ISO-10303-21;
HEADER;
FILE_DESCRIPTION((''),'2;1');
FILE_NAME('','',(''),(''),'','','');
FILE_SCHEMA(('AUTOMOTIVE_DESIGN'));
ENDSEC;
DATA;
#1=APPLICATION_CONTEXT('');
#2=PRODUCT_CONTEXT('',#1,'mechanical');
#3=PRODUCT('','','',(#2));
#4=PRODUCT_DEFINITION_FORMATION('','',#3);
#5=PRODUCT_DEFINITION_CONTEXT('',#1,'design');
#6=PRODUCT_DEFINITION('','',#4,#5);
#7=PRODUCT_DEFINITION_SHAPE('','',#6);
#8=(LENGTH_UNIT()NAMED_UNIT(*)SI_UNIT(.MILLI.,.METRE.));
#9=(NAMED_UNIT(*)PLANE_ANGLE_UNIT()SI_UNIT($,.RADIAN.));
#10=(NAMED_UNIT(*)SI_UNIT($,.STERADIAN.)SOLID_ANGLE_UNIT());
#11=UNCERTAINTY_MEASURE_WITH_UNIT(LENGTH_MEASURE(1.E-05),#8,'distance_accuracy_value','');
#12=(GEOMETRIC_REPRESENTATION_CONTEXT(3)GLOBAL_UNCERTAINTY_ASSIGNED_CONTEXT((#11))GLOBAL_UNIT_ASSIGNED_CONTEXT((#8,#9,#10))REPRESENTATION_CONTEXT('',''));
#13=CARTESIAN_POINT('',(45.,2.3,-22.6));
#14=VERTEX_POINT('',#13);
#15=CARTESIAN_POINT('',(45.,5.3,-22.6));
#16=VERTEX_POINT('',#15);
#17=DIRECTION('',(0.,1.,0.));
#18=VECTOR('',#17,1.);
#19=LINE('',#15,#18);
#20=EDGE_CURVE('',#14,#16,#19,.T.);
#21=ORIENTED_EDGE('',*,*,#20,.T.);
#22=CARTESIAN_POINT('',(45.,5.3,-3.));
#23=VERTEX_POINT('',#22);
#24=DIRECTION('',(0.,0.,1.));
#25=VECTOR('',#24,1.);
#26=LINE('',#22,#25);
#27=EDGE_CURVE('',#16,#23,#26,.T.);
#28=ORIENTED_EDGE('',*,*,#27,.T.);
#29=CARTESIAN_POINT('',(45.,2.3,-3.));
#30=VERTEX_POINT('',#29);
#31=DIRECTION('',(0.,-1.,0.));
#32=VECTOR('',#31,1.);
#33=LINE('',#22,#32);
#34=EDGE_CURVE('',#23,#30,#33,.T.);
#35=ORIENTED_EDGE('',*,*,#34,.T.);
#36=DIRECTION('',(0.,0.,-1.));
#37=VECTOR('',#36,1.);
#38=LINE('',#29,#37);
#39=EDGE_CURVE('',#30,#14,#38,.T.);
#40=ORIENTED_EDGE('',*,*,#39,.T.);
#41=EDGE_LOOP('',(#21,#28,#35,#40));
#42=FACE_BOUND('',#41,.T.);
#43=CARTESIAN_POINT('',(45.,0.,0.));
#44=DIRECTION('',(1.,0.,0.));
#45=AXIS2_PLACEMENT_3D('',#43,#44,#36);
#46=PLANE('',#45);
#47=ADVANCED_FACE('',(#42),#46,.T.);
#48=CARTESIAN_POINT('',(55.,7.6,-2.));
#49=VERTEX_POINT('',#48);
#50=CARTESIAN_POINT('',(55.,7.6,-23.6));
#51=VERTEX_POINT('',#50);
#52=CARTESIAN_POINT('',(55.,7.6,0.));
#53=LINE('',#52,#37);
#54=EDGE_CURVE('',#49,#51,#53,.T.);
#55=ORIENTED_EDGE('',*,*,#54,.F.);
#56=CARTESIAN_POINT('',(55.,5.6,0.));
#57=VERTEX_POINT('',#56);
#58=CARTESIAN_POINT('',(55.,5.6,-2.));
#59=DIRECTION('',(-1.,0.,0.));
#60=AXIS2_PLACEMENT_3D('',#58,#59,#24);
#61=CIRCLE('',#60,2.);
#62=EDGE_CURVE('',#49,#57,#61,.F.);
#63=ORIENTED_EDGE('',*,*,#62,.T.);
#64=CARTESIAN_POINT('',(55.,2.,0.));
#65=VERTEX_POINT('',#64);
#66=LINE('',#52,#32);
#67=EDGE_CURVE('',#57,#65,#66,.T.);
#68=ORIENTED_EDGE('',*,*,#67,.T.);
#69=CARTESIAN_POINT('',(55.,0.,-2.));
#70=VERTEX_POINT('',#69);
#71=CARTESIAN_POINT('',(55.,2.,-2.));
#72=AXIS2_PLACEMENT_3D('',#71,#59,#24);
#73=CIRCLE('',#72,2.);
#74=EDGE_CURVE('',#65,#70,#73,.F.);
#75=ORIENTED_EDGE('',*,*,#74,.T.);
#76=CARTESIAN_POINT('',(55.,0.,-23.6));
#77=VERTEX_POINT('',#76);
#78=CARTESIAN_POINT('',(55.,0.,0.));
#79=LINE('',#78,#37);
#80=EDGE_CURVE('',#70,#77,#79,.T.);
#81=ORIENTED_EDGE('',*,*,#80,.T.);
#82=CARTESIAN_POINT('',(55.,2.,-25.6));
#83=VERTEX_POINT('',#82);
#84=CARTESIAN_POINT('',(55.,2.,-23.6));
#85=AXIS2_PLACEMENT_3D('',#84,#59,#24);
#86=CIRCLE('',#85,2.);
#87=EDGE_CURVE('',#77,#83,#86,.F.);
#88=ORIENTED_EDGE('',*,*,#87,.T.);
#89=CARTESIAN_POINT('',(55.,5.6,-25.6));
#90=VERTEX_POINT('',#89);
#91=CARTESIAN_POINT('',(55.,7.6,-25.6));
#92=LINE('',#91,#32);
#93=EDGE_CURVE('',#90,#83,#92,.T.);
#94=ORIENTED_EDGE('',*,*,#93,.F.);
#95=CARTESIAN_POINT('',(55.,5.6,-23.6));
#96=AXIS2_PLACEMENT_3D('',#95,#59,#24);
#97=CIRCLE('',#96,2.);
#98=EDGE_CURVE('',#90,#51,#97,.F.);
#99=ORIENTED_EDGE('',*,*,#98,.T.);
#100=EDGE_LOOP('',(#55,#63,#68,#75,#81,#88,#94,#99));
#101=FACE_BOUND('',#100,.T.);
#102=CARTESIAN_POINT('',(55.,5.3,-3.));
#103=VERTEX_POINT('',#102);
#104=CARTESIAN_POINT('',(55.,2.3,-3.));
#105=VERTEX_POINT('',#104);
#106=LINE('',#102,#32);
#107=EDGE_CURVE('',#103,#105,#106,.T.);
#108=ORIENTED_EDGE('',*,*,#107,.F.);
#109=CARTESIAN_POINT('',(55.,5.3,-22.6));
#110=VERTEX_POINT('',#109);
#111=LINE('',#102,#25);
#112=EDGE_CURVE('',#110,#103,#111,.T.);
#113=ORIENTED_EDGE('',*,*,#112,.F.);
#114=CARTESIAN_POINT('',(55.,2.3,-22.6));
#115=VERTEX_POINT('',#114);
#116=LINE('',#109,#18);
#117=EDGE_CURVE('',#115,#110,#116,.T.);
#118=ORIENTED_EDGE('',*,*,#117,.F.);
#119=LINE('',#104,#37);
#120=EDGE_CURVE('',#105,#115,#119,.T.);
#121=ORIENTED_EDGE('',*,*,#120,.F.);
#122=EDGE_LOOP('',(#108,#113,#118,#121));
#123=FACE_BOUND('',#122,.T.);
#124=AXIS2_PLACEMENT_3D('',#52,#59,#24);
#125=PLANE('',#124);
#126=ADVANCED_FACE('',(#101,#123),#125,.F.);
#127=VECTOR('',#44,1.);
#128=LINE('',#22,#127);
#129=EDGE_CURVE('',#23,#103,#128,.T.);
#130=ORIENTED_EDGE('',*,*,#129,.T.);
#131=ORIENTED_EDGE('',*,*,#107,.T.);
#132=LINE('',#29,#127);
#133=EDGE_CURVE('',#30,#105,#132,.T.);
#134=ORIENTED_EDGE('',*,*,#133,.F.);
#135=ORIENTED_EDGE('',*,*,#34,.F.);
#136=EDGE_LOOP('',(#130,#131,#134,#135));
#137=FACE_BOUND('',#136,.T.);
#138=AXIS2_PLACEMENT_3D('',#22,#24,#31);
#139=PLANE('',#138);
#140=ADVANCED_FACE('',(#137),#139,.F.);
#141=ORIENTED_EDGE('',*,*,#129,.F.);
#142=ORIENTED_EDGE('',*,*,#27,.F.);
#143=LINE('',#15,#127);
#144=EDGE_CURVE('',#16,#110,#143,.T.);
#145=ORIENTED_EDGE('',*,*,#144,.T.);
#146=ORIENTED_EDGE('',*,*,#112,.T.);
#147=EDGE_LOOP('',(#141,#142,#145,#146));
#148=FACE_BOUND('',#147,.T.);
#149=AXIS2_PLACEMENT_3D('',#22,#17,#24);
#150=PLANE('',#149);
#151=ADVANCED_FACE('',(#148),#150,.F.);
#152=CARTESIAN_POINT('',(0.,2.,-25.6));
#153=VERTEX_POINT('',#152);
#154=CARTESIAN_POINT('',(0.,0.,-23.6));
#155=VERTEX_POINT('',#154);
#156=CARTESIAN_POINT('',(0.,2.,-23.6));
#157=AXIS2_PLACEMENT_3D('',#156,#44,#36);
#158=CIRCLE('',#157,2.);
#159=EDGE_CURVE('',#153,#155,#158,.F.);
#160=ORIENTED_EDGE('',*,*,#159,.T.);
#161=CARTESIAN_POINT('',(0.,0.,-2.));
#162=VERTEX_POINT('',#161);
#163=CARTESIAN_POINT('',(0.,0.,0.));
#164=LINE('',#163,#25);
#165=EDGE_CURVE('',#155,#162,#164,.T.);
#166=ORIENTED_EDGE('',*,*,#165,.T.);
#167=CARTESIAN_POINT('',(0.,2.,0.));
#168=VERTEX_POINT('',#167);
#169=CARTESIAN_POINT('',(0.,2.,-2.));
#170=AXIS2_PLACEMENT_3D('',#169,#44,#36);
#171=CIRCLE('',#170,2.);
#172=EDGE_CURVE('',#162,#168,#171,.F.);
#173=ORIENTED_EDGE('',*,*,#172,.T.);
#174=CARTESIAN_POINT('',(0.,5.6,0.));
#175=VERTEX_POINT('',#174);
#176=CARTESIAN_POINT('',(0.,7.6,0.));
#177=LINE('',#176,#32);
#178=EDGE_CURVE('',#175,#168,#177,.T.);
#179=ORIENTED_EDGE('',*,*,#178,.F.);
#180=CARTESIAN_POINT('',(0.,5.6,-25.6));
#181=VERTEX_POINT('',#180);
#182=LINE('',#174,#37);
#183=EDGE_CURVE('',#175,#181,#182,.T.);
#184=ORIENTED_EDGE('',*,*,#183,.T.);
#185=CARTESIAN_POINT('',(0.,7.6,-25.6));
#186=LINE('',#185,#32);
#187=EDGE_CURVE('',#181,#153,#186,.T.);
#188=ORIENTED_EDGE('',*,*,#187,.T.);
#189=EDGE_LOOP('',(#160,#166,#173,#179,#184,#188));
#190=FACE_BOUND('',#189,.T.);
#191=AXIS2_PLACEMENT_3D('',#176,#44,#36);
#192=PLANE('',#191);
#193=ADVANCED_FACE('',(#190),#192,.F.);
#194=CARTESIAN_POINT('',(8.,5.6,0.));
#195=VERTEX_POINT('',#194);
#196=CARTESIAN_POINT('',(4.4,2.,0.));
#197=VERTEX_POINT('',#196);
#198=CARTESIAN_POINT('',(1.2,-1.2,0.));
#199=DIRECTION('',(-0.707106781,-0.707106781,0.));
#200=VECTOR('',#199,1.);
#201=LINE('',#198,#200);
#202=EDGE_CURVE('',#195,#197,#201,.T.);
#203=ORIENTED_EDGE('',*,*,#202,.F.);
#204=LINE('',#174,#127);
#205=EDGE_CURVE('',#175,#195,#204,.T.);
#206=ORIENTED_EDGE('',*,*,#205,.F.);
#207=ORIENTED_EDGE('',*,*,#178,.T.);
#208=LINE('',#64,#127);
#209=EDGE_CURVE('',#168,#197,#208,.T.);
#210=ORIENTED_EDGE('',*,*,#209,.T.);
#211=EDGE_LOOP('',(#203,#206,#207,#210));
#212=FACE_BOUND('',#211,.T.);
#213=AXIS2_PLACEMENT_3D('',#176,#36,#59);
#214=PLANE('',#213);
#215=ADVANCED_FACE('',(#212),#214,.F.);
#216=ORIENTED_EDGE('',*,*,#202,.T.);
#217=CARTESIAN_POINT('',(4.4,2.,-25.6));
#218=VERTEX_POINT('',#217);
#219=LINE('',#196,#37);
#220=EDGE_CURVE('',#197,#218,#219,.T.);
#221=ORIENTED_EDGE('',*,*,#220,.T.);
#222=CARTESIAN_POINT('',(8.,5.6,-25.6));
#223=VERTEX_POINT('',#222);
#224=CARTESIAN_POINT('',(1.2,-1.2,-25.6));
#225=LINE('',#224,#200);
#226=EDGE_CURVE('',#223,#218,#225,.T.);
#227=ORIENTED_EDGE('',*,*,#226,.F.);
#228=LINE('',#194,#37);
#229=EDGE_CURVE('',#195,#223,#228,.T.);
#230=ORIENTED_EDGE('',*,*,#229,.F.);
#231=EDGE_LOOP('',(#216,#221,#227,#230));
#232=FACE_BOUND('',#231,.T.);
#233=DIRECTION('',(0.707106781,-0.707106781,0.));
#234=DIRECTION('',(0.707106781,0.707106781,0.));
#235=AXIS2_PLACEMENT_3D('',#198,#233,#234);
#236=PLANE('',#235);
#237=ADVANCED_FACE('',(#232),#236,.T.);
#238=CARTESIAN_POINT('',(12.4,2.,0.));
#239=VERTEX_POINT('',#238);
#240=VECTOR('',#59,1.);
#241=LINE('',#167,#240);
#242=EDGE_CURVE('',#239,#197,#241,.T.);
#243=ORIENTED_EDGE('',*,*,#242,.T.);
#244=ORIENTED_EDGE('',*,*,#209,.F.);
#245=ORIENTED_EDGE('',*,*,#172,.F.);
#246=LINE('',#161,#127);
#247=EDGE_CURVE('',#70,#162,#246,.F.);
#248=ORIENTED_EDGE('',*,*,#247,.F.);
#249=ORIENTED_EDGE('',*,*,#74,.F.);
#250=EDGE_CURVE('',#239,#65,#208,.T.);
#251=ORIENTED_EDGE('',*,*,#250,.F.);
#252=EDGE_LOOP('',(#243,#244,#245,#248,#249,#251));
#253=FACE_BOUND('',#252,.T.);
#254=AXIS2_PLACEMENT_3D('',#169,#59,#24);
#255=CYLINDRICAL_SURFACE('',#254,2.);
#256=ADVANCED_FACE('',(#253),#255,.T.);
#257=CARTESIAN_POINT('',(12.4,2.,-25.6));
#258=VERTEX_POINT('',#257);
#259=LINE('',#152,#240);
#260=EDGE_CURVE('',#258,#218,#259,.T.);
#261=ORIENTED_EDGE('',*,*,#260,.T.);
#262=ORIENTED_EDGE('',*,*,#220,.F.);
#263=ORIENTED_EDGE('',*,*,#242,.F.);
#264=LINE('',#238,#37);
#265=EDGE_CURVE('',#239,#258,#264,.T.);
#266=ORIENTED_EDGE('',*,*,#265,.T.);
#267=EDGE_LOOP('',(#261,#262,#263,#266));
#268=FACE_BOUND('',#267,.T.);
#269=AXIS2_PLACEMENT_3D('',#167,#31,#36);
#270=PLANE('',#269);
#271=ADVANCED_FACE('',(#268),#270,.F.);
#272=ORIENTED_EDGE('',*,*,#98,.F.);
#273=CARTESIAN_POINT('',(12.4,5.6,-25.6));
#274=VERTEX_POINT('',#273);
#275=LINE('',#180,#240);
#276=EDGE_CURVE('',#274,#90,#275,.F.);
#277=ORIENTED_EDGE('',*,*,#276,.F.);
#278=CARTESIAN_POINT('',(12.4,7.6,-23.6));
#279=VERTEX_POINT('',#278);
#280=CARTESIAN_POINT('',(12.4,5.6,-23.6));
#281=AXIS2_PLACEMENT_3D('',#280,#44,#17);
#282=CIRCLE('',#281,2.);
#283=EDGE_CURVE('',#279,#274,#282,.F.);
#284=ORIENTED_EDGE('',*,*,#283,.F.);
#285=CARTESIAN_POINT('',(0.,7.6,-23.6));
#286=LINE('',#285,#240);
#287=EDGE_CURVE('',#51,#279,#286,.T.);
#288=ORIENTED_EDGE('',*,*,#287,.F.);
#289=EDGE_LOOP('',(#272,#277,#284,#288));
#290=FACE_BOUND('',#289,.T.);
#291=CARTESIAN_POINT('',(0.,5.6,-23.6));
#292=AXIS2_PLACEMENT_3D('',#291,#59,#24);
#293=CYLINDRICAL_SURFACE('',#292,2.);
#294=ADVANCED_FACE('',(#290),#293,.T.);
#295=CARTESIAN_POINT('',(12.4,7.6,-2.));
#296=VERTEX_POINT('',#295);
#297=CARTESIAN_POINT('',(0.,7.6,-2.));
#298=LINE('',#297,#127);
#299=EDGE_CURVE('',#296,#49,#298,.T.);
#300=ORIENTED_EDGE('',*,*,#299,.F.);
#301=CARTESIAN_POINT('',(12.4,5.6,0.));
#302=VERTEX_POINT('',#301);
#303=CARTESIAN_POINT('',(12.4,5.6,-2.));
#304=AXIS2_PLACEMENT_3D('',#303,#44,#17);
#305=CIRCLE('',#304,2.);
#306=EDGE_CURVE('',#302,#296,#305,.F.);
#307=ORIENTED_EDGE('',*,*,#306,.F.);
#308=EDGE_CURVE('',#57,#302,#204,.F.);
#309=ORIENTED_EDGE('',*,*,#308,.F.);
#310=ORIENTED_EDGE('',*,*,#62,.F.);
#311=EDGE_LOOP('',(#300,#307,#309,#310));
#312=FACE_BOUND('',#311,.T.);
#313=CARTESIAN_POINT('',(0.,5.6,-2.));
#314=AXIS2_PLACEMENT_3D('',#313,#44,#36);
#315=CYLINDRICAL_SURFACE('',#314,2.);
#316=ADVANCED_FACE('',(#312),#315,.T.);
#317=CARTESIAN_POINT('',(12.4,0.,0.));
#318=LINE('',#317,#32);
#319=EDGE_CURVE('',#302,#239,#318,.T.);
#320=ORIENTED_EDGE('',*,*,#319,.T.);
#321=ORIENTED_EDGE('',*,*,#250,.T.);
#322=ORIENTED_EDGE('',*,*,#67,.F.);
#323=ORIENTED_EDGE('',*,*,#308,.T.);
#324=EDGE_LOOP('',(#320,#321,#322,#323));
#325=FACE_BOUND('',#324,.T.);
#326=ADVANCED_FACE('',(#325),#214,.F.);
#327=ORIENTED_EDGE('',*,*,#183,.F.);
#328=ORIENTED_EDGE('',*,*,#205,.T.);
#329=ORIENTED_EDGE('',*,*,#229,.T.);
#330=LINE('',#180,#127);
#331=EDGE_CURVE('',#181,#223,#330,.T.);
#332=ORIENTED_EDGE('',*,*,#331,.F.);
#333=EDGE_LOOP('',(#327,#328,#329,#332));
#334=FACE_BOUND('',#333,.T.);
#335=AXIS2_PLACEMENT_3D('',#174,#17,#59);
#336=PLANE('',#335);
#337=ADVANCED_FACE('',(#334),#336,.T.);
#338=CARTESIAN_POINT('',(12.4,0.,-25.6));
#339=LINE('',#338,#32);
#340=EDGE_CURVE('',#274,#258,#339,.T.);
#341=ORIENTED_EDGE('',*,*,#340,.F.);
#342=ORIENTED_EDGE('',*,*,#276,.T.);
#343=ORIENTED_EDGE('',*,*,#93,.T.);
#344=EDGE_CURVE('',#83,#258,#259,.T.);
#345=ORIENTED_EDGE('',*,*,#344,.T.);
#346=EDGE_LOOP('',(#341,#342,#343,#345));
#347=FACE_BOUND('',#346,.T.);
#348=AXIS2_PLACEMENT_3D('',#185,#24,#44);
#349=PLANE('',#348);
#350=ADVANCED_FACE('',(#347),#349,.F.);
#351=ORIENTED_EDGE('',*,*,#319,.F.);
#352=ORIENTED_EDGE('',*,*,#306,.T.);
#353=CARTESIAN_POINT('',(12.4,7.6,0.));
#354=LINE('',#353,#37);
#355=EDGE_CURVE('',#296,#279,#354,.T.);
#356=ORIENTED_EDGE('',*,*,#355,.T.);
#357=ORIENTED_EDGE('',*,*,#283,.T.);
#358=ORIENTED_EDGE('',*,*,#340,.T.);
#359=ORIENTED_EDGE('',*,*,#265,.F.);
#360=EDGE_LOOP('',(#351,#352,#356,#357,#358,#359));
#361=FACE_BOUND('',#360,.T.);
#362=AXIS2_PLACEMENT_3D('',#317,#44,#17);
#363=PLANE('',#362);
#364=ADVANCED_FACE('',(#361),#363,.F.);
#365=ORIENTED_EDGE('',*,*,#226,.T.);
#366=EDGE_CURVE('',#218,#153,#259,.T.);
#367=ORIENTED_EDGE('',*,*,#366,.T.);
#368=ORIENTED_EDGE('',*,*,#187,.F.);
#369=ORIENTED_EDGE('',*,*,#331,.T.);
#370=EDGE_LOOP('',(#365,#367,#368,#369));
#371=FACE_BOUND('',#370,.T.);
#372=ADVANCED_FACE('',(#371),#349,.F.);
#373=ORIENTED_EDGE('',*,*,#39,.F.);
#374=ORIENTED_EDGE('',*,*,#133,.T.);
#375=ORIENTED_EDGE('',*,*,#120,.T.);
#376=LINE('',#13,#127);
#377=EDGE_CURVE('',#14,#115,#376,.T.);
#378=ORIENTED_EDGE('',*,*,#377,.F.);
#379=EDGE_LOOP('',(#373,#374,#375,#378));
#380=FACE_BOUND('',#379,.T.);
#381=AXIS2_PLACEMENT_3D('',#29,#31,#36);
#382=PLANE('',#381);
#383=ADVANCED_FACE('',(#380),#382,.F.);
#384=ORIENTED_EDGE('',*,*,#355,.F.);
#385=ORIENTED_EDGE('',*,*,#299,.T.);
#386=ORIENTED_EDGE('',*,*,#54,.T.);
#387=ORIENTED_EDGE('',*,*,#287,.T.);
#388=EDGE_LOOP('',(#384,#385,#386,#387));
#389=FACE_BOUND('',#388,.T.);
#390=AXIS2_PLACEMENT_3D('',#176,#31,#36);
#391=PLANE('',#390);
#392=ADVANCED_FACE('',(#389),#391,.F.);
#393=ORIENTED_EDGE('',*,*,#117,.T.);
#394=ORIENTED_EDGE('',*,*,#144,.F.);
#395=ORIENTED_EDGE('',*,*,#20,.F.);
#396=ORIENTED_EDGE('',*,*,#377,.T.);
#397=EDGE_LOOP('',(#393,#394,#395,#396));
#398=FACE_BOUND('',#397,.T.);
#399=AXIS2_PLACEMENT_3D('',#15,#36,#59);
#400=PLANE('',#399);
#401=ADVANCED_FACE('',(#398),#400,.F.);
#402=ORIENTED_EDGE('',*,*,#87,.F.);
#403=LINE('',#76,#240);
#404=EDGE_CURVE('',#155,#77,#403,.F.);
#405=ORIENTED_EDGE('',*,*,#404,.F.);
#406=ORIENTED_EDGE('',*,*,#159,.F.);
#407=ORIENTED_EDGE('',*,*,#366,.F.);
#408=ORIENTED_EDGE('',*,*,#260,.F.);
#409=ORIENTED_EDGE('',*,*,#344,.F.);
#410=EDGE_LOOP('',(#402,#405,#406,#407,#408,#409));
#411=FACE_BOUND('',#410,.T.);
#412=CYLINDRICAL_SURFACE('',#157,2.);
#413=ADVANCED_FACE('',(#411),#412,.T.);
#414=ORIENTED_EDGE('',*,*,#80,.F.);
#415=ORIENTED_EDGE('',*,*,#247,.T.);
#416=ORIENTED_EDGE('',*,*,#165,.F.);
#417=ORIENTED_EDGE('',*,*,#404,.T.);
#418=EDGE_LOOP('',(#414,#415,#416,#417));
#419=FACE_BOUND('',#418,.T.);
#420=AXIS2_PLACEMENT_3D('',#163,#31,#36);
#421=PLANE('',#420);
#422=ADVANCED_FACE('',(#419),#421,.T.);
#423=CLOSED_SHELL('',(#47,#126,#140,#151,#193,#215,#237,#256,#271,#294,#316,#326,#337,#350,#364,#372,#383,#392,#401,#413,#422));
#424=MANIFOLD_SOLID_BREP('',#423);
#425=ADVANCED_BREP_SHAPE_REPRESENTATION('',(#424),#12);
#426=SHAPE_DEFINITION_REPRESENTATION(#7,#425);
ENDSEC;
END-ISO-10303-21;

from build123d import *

# Parameters (mm, degrees)
SKETCH1_W           = 55
SKETCH1_H           = 25.6
BOSS_EXTRUDE1_DEPTH = 7.6
CUT_EXTRUDE1_DEPTH  = 25.6
FILLET1_R           = 2
SKETCH3_W           = 19.6
SKETCH3_H           = 3
CUT_EXTRUDE2_DEPTH  = 10


with BuildPart() as part:
    # Sketch1 → Boss-Extrude1 (new body)
    with BuildSketch(Plane(origin=(0, 0, 0), x_dir=(1, 0, 0), z_dir=(0, 1, 0))):
        with Locations((27.5, 12.8)):
            Rectangle(SKETCH1_W, SKETCH1_H)
    extrude(amount=BOSS_EXTRUDE1_DEPTH)

    # Sketch2 → Cut-Extrude1 (cut)
    with BuildSketch(Plane(origin=(0, 0, -25.6), x_dir=(-1, 0, 0), z_dir=(0, 0, -1))):
        Polygon((-8, 5.6), (-4.4, 2), (-12.4, 2), (-12.4, 7.6), (0, 7.6), (0, 5.6), align=None)
    extrude(amount=-CUT_EXTRUDE1_DEPTH, mode=Mode.SUBTRACT)

    # Fillet1
    fillet1_edges = [part.edges().sort_by_distance(p)[0] for p in [
        (33.7, 7.6, -25.6),
        (33.7, 7.6, 0),
        (27.5, 0, -25.6),
        (27.5, 0, 0),
    ]]
    fillet(fillet1_edges, radius=FILLET1_R - 0.0001)  # a hair under: the kernel refuses the full size

    # Sketch3 → Cut-Extrude2 (cut)
    with BuildSketch(Plane(origin=(55, 0, 0), x_dir=(0, 0, -1), z_dir=(1, 0, 0))):
        with Locations((12.8, 3.8)):
            Rectangle(SKETCH3_W, SKETCH3_H)
    extrude(amount=-CUT_EXTRUDE2_DEPTH, mode=Mode.SUBTRACT)


solid = part.part
